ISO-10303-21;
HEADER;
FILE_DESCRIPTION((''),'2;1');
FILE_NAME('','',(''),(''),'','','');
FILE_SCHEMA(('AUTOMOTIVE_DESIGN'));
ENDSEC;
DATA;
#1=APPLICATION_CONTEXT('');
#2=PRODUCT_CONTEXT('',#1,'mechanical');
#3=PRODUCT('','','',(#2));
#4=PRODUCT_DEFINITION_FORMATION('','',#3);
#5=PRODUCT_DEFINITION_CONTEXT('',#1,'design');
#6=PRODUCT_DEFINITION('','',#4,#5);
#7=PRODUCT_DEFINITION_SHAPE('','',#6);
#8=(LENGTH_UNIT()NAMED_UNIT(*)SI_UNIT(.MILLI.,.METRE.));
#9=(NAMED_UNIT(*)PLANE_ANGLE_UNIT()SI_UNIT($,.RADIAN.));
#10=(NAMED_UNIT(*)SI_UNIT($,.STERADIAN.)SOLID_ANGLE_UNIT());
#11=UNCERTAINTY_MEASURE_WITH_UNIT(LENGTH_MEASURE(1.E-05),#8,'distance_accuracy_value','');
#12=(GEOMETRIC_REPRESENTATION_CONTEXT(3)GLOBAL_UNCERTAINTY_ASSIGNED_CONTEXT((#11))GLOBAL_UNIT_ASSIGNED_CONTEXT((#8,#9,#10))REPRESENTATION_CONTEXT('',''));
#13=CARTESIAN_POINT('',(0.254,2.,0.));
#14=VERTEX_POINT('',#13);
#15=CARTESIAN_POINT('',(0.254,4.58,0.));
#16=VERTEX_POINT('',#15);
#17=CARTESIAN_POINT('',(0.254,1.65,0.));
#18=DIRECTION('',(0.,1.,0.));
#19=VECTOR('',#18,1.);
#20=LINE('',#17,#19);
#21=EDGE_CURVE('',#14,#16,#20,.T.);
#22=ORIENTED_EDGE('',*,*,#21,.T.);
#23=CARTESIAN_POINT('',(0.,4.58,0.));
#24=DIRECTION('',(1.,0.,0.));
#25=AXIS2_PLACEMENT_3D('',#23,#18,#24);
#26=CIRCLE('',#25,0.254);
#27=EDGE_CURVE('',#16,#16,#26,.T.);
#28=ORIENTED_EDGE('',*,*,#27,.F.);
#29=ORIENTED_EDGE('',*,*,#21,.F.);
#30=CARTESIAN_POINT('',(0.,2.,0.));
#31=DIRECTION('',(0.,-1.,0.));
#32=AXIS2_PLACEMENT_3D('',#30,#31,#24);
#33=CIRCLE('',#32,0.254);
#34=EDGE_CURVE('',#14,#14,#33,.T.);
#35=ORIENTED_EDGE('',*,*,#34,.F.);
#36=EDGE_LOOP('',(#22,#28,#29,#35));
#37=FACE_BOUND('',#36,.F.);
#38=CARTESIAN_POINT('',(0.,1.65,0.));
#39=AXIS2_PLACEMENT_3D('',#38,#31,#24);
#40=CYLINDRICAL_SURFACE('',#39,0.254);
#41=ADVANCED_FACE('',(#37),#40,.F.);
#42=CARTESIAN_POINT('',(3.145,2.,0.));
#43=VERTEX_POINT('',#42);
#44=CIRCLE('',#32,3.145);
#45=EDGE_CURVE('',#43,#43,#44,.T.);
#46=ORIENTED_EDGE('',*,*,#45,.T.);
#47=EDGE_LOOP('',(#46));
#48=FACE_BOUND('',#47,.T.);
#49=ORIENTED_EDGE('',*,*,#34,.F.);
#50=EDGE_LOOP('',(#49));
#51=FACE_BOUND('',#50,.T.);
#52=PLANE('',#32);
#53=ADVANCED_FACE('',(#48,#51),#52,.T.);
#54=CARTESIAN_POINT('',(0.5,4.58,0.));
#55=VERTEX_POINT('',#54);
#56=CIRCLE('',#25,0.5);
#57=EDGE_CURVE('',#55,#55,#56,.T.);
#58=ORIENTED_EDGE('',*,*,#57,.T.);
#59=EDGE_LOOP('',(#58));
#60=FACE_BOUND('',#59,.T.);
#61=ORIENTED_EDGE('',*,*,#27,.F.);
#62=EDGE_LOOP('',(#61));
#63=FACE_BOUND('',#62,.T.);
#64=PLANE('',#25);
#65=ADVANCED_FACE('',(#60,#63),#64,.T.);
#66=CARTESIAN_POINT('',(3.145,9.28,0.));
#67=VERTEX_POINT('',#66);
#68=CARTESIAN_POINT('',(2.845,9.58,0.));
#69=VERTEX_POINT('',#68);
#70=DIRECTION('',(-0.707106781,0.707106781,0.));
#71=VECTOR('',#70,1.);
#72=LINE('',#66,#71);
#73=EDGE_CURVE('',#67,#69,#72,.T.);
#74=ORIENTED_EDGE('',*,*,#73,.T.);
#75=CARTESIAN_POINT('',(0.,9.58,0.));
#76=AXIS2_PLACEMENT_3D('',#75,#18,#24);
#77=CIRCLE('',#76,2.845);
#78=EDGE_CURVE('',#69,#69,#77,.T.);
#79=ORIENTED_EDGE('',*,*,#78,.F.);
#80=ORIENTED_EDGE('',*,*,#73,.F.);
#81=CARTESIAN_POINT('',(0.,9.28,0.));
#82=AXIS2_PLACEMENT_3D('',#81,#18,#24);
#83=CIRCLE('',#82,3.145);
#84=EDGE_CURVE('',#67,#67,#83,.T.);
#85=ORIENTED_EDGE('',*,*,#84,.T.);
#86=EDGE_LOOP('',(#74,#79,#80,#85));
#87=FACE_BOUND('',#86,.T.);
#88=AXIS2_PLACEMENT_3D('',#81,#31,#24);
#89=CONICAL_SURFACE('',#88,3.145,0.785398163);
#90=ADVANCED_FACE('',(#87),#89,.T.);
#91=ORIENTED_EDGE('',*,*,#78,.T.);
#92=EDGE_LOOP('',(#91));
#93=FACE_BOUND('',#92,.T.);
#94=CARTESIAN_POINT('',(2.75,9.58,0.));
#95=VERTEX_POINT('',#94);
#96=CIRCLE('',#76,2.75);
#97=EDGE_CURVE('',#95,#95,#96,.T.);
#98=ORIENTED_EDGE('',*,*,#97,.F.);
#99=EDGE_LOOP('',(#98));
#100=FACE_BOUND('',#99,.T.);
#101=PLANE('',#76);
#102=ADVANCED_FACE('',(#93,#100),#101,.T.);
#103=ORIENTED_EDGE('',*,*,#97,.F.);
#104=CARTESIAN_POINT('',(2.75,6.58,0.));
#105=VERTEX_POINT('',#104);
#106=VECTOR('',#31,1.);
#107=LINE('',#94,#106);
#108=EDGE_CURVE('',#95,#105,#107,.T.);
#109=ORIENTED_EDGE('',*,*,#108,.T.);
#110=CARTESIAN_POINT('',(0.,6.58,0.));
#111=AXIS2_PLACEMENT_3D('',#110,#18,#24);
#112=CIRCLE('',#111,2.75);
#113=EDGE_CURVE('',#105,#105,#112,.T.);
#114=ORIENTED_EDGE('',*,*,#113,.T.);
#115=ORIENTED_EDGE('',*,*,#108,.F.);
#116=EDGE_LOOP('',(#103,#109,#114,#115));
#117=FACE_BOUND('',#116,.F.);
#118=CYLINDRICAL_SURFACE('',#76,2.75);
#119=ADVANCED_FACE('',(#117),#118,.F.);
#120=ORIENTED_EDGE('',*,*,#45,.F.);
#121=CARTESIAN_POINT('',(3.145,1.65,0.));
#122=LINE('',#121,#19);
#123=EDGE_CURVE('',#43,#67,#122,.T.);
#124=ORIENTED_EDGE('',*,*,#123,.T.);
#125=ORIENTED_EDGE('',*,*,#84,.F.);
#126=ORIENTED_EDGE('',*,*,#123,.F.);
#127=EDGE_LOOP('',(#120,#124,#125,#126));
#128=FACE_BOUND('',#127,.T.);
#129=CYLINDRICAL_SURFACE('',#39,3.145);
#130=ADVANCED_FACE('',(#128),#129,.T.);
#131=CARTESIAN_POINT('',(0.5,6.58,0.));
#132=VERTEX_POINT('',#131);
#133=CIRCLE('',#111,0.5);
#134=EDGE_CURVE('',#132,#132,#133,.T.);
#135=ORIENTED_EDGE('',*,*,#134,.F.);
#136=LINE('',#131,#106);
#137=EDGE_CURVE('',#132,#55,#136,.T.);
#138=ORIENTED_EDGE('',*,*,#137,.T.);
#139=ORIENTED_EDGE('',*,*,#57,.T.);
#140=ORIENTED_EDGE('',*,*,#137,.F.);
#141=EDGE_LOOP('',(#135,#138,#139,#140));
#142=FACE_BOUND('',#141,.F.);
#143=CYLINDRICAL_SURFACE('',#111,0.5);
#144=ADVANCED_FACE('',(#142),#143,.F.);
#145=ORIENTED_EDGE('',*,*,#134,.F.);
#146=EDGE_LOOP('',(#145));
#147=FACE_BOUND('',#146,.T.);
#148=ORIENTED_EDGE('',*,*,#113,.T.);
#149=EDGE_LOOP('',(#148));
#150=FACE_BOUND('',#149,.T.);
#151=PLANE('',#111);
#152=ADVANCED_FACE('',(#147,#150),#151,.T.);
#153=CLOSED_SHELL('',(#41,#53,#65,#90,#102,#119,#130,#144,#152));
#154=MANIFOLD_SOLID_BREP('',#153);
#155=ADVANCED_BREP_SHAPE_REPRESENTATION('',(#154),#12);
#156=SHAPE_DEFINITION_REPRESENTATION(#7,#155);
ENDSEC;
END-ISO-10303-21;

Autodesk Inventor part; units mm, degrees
ref_plane "YZ Plane" through (0, 0, 0) normal (1, 0, 0) x (0, 1, 0)
ref_plane "XZ Plane" through (0, 0, 0) normal (0, 1, 0) x (-1, 0, 0)
ref_plane "XY Plane" through (0, 0, 0) normal (0, 0, 1) x (1, 0, 0)
sketch "Sketch1" plane through (0, 0, 0) normal (0, 1, 0) x (-1, 0, 0)
  line L0 (4.85, 6.35) -> (-4.85, 6.35)
  line L1 (-6.35, 4.85) -> (-6.35, -4.85)
  line L2 (-4.85, -6.35) -> (4.85, -6.35)
  line L3 (6.35, -4.85) -> (6.35, 4.85)
  line L4 (6.35, 6.35) -> (-6.35, -6.35) construction
  line L5 (-6.35, 6.35) -> (6.35, -6.35) construction
  line L6 (6.35, -4.85) -> (4.85, -6.35)
  line L7 (-4.85, -6.35) -> (-6.35, -4.85)
  line L8 (-4.85, 6.35) -> (-6.35, 4.85)
  line L9 (6.35, 4.85) -> (4.85, 6.35)
  line L10 (4.32, 4.32) -> (-4.32, 4.32) construction
  line L11 (-4.32, 4.32) -> (-4.32, -4.32) construction
  line L12 (-4.32, -4.32) -> (4.32, -4.32) construction
  line L13 (4.32, -4.32) -> (4.32, 4.32) construction
  line L14 (4.32, 4.32) -> (-4.32, -4.32) construction
  line L15 (-4.32, 4.32) -> (4.32, -4.32) construction
  circle A0 centre (0, 0) radius 1.3272
  dimension "d0" = 12.7
  dimension "d1" = 12.7
  dimension "d5" = 9.7
  dimension "d6" = 1.5
  dimension "d7" = 8.64
  dimension "d8" = 8.64
  dimension "d9" = 2.6543
extrude "Extrusion1" add sketch "Sketch1" along normal blind 1.65
sketch "Sketch2" plane through (0, 1.65, 0) normal (0, 1, 0) x (1, 0, 0)
  circle A0 centre (0, 0) radius 1.3272 projected
  line L0 (-4.32, -4.32) -> (4.32, -4.32) construction
  line L1 (4.32, -4.32) -> (4.32, 4.32) construction
  line L2 (4.32, 4.32) -> (-4.32, 4.32) construction
  line L3 (-4.32, 4.32) -> (-4.32, -4.32) construction
  line L4 (-4.32, -4.32) -> (4.32, 4.32) construction
  line L5 (4.32, -4.32) -> (-4.32, 4.32) construction
  dimension "d12" = 8.64
  dimension "d13" = 8.64
hole "Hole1" at (-4.32, 1.65, -4.32) at (4.32, 1.65, -4.32) at (4.32, 1.65, 4.32) at (-4.32, 1.65, 4.32) direction (0, -1, 0) diameter 2.64 depth 1.65 tip angle 118
sketch "Sketch3" plane through (0, 1.65, 0) normal (0, 1, 0) x (1, 0, 0)
  circle A0 centre (0, 0) radius 1.3272 projected
  circle A1 centre (0, 0) radius 3.145
  dimension "d21" = 6.29
extrude "Extrusion2" add sketch "Sketch3" along normal blind 7.93 contours A0 | A1
thread "Thread1" size "1/4-36 UNS" class "2A" standard "ANSI Unified Screw Threads" length 4.38
chamfer "Chamfer1" distance 0.3 angle 45 1 edges at (-3.145, 9.58, 0)
sketch "Sketch4" plane through (0, 9.58, 0) normal (0, 1, 0) x (1, 0, 0)
  circle A0 centre (0, 0) radius 2.845 projected
  circle A1 centre (0, 0) radius 2.75
  dimension "d30" = 5.5
extrude "Extrusion3" cut sketch "Sketch4" against normal blind 3 contours A1
sketch "Sketch5" plane through (0, 1.65, 0) normal (0, -1, 0) x (1, 0, 0)
  circle A0 centre (0, 0) radius 1.3272 projected
  circle A1 centre (0, 0) radius 0.254
  dimension "d33" = 0.508
extrude "Extrusion4" cut sketch "Sketch5" against normal blind 6 contours A1
sketch "Sketch6" plane through (0, 6.58, 0) normal (0, 1, 0) x (1, 0, 0)
  circle A0 centre (0, 0) radius 0.254 projected
  circle A1 centre (0, 0) radius 2.75 projected
  circle A2 centre (0, 0) radius 0.5
  dimension "d36" = 1
extrude "Extrusion5" cut sketch "Sketch6" against normal blind 2 contours A2
sketch "Sketch7" plane through (0, 0, 0) normal (0, -1, 0) x (1, 0, 0)
  line L0 (-6.35, -6.35) -> (6.35, -6.35)
  line L1 (6.35, -6.35) -> (6.35, 6.35)
  line L2 (6.35, 6.35) -> (-6.35, 6.35)
  line L3 (-6.35, 6.35) -> (-6.35, -6.35)
  circle A0 centre (0, 0) radius 0.254 projected
  line L4 (-6.35, -6.35) -> (6.35, 6.35) construction
  line L5 (6.35, -6.35) -> (-6.35, 6.35) construction
extrude "Extrusion6" cut sketch "Sketch7" against normal blind 2
properties part number "sma"
